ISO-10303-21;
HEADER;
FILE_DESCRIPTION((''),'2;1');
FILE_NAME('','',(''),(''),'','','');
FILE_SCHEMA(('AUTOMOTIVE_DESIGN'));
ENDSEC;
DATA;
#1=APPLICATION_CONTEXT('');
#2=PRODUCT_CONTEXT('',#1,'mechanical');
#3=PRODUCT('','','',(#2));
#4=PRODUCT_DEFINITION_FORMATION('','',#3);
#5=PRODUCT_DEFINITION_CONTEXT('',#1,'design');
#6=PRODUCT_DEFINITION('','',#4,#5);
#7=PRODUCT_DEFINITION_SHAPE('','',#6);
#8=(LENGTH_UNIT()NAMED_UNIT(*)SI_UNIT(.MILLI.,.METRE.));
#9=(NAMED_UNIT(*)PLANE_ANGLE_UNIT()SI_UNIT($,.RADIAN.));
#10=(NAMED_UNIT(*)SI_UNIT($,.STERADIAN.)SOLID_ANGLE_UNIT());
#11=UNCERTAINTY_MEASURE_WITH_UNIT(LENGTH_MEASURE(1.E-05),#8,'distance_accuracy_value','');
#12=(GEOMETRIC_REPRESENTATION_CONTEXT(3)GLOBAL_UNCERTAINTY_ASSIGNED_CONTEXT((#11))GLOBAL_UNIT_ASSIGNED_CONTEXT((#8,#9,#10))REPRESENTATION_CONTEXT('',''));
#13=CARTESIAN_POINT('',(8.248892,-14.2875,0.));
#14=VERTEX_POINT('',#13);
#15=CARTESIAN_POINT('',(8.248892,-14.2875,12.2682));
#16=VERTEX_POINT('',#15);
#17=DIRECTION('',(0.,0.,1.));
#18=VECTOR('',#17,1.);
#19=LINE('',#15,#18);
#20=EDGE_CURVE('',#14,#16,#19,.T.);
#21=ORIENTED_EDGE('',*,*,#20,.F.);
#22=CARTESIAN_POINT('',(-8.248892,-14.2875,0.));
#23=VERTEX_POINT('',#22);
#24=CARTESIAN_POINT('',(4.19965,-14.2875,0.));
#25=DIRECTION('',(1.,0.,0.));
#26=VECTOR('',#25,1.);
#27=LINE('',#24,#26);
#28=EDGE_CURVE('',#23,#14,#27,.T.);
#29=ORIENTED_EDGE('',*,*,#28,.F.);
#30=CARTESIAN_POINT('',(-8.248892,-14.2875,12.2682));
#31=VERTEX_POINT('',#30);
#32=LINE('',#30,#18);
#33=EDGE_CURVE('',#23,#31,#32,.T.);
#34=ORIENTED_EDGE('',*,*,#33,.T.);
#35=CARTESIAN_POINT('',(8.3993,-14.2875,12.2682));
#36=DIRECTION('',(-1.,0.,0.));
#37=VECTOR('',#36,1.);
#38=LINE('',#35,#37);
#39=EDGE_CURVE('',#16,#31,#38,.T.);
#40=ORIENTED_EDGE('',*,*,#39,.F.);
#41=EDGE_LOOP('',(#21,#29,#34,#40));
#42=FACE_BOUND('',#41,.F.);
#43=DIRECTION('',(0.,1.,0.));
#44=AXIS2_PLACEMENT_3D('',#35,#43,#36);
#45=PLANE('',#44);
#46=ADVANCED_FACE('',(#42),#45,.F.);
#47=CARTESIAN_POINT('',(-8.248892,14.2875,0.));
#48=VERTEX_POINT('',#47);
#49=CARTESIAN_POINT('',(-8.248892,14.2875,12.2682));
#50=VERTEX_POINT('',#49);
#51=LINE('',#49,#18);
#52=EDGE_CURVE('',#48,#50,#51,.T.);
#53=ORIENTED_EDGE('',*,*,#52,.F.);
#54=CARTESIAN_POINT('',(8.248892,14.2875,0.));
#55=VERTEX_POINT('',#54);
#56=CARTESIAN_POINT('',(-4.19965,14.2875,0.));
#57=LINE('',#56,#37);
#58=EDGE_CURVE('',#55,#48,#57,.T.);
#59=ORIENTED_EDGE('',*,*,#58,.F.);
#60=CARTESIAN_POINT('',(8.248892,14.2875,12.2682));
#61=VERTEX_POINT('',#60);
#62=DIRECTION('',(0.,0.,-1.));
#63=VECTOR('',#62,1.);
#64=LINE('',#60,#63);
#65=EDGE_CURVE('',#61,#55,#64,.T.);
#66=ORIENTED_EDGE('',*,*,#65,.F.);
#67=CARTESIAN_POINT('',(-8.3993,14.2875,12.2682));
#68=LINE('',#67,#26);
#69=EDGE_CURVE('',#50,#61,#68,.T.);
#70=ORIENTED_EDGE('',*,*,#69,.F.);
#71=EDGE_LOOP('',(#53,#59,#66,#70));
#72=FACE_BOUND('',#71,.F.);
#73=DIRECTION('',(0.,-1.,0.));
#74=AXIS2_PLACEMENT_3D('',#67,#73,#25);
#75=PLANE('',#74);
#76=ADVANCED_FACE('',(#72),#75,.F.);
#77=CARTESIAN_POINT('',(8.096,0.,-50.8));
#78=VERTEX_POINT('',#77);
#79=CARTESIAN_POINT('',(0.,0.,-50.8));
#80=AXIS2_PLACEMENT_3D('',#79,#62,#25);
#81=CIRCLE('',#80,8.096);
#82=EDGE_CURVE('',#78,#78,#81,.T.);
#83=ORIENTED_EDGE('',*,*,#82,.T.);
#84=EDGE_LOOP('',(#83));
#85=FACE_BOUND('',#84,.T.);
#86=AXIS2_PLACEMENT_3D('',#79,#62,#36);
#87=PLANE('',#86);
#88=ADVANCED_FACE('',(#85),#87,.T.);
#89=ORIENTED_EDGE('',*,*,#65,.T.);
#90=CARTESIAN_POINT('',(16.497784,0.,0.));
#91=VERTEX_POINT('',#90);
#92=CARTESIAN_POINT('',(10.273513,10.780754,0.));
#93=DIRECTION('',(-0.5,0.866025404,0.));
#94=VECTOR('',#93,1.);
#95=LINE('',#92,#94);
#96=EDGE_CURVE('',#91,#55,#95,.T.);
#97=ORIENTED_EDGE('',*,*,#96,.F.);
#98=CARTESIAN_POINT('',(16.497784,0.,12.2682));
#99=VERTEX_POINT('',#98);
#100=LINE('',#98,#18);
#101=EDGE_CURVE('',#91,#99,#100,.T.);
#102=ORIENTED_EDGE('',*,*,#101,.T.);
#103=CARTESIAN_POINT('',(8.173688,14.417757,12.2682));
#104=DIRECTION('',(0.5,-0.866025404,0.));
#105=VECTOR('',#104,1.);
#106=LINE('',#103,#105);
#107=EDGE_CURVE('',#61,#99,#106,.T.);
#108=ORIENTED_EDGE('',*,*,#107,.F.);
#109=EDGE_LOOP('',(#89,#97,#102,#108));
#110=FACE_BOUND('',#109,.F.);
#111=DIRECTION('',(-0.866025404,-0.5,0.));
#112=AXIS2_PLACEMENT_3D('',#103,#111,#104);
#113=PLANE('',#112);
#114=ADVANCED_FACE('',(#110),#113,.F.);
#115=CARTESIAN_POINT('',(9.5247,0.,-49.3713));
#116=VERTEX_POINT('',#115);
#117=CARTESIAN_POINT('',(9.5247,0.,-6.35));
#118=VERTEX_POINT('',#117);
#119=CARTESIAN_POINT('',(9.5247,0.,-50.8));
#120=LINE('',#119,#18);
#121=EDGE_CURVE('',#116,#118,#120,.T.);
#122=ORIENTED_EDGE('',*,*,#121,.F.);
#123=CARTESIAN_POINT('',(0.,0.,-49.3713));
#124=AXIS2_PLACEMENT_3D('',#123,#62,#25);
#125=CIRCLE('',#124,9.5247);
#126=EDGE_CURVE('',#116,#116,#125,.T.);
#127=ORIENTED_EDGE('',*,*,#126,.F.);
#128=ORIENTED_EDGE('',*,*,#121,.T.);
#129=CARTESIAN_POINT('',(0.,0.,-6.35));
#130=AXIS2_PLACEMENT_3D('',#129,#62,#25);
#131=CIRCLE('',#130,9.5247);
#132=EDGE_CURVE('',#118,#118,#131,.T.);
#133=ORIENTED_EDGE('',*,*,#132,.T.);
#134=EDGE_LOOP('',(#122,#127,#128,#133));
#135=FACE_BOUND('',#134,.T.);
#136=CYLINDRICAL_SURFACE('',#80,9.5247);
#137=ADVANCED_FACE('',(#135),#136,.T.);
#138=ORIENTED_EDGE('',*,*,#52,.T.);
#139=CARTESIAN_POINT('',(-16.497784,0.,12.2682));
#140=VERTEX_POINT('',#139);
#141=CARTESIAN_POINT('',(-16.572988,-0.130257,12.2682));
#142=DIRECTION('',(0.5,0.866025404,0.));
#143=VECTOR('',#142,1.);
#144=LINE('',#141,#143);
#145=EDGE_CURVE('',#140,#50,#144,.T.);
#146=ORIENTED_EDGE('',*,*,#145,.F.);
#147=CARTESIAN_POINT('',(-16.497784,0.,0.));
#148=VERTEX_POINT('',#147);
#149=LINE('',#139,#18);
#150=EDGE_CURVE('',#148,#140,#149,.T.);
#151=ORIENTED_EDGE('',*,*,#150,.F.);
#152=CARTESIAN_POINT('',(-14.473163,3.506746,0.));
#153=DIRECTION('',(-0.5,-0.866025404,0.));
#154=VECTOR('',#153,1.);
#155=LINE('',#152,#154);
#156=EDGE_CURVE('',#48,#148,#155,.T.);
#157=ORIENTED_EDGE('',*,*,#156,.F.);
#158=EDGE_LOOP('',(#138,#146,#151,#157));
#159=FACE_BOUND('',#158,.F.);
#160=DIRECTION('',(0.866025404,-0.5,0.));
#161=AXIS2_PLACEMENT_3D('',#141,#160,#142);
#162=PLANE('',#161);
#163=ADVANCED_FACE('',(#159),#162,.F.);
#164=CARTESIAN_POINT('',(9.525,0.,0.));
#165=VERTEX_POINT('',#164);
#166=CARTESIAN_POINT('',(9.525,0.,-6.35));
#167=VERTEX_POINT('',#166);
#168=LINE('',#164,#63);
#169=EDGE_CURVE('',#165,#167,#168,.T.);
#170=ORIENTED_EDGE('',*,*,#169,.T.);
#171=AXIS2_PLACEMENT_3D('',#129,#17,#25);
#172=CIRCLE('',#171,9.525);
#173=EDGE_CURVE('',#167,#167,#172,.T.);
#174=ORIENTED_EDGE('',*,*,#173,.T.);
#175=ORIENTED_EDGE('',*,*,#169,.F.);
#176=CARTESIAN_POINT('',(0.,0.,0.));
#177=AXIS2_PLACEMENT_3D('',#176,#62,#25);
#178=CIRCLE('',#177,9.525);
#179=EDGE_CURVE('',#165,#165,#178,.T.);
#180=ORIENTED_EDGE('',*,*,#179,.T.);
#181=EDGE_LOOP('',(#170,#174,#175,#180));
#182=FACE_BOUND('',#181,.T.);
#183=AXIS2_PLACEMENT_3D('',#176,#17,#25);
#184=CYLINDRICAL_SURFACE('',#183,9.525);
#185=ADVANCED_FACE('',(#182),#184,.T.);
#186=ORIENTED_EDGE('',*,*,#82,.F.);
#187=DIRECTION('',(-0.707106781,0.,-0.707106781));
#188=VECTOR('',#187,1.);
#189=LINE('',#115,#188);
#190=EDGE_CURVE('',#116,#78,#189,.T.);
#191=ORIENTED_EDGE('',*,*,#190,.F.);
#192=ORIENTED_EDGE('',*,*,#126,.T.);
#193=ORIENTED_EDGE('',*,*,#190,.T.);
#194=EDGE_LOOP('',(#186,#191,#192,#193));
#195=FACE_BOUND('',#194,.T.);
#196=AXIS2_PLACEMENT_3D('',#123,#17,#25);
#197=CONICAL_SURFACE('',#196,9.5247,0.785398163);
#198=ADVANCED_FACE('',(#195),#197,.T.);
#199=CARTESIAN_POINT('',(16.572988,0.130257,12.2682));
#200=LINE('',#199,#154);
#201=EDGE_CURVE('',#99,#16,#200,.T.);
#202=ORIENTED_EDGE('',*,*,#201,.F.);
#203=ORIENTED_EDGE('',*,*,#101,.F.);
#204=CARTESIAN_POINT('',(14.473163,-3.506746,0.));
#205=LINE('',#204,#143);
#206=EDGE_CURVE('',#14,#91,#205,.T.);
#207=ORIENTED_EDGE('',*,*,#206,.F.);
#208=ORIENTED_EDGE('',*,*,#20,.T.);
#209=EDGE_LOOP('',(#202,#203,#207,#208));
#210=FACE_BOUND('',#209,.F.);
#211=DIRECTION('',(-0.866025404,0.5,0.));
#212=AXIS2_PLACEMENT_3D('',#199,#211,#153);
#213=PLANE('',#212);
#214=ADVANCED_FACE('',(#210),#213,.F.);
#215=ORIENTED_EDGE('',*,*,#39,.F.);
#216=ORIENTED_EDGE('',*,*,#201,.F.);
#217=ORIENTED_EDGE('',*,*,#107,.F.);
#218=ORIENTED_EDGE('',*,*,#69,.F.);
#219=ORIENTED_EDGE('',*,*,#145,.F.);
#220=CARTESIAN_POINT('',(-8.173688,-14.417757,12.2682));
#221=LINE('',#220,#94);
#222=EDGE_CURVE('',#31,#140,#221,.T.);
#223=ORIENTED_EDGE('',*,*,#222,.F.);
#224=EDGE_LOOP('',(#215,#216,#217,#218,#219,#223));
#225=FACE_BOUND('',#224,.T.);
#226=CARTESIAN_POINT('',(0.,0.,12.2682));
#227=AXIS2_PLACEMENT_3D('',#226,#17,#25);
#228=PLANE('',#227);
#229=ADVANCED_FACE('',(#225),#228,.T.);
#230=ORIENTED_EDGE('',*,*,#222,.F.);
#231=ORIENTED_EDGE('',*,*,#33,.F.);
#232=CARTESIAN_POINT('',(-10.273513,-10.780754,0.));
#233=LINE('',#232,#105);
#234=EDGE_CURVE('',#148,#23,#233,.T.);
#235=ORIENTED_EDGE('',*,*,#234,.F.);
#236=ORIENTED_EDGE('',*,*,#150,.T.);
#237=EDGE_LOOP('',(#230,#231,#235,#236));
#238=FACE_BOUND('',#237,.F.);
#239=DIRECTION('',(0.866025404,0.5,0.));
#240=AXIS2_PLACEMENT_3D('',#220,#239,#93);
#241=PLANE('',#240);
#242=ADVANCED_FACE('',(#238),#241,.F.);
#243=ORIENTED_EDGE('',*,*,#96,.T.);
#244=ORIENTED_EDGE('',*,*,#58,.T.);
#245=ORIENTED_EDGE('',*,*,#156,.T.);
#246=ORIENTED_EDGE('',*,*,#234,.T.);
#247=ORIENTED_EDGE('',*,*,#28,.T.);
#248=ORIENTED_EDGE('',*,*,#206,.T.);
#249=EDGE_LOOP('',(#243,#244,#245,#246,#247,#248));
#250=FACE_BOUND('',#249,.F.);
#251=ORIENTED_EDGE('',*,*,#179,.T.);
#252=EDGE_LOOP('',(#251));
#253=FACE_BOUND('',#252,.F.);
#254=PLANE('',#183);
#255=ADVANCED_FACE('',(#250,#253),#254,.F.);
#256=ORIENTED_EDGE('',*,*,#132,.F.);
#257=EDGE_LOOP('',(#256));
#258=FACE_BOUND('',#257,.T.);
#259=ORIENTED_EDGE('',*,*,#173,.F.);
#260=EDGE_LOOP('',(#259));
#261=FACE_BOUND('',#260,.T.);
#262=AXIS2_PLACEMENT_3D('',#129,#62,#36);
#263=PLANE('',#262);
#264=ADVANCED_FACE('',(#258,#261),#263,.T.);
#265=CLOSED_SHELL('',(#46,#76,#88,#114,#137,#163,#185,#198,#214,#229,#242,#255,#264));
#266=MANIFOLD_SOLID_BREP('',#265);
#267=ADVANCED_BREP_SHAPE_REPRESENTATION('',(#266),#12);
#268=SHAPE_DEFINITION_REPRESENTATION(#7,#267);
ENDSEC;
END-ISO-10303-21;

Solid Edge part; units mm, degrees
sketch "Sketch1" plane through (0, 0, 0) normal (0, 0, 1) x (1, 0, 0)
  circle A0 centre (0, 0) radius 16.5735
  dimension "D1" = 33.147
extrude "Protrusion1" add sketch "Sketch1" along normal blind 12.2682
sketch "Sketch2" plane through (0, 0, 0) normal (0, 0, -1) x (1, 0, 0)
  circle A0 centre (0, 0) radius 9.525
extrude "Protrusion2" add sketch "Sketch2" along normal blind 50.8
sketch "Sketch3" plane through (0, 0, -50.8) normal (0, 0, -1) x (1, 0, 0)
  circle A0 centre (0, 0) radius 9.5247
extrude "Cutout1" cut sketch "Sketch3" against normal blind 44.45 flip side to cut
chamfer "Chamfer_1" distance 1.4287 angle 45 1 edges at (-9.5247, 0, -50.8)
sketch "Sketch4" plane through (0, 0, 12.2682) normal (0, 0, 1) x (1, 0, 0)
  line L0 (-8.3993, 14.2875) -> (8.3993, 14.2875)
  dimension "D1" = 28.575
extrude "Cutout2" cut sketch "Sketch4" against normal up to next material side at (0, 14.3375, 12.2682)
pattern_circular "Pattern1" count 6 over 360 about axis through (0, 0, 12.2682) along (0, 0, 1) of "Cutout2"
properties part number "24106177"
